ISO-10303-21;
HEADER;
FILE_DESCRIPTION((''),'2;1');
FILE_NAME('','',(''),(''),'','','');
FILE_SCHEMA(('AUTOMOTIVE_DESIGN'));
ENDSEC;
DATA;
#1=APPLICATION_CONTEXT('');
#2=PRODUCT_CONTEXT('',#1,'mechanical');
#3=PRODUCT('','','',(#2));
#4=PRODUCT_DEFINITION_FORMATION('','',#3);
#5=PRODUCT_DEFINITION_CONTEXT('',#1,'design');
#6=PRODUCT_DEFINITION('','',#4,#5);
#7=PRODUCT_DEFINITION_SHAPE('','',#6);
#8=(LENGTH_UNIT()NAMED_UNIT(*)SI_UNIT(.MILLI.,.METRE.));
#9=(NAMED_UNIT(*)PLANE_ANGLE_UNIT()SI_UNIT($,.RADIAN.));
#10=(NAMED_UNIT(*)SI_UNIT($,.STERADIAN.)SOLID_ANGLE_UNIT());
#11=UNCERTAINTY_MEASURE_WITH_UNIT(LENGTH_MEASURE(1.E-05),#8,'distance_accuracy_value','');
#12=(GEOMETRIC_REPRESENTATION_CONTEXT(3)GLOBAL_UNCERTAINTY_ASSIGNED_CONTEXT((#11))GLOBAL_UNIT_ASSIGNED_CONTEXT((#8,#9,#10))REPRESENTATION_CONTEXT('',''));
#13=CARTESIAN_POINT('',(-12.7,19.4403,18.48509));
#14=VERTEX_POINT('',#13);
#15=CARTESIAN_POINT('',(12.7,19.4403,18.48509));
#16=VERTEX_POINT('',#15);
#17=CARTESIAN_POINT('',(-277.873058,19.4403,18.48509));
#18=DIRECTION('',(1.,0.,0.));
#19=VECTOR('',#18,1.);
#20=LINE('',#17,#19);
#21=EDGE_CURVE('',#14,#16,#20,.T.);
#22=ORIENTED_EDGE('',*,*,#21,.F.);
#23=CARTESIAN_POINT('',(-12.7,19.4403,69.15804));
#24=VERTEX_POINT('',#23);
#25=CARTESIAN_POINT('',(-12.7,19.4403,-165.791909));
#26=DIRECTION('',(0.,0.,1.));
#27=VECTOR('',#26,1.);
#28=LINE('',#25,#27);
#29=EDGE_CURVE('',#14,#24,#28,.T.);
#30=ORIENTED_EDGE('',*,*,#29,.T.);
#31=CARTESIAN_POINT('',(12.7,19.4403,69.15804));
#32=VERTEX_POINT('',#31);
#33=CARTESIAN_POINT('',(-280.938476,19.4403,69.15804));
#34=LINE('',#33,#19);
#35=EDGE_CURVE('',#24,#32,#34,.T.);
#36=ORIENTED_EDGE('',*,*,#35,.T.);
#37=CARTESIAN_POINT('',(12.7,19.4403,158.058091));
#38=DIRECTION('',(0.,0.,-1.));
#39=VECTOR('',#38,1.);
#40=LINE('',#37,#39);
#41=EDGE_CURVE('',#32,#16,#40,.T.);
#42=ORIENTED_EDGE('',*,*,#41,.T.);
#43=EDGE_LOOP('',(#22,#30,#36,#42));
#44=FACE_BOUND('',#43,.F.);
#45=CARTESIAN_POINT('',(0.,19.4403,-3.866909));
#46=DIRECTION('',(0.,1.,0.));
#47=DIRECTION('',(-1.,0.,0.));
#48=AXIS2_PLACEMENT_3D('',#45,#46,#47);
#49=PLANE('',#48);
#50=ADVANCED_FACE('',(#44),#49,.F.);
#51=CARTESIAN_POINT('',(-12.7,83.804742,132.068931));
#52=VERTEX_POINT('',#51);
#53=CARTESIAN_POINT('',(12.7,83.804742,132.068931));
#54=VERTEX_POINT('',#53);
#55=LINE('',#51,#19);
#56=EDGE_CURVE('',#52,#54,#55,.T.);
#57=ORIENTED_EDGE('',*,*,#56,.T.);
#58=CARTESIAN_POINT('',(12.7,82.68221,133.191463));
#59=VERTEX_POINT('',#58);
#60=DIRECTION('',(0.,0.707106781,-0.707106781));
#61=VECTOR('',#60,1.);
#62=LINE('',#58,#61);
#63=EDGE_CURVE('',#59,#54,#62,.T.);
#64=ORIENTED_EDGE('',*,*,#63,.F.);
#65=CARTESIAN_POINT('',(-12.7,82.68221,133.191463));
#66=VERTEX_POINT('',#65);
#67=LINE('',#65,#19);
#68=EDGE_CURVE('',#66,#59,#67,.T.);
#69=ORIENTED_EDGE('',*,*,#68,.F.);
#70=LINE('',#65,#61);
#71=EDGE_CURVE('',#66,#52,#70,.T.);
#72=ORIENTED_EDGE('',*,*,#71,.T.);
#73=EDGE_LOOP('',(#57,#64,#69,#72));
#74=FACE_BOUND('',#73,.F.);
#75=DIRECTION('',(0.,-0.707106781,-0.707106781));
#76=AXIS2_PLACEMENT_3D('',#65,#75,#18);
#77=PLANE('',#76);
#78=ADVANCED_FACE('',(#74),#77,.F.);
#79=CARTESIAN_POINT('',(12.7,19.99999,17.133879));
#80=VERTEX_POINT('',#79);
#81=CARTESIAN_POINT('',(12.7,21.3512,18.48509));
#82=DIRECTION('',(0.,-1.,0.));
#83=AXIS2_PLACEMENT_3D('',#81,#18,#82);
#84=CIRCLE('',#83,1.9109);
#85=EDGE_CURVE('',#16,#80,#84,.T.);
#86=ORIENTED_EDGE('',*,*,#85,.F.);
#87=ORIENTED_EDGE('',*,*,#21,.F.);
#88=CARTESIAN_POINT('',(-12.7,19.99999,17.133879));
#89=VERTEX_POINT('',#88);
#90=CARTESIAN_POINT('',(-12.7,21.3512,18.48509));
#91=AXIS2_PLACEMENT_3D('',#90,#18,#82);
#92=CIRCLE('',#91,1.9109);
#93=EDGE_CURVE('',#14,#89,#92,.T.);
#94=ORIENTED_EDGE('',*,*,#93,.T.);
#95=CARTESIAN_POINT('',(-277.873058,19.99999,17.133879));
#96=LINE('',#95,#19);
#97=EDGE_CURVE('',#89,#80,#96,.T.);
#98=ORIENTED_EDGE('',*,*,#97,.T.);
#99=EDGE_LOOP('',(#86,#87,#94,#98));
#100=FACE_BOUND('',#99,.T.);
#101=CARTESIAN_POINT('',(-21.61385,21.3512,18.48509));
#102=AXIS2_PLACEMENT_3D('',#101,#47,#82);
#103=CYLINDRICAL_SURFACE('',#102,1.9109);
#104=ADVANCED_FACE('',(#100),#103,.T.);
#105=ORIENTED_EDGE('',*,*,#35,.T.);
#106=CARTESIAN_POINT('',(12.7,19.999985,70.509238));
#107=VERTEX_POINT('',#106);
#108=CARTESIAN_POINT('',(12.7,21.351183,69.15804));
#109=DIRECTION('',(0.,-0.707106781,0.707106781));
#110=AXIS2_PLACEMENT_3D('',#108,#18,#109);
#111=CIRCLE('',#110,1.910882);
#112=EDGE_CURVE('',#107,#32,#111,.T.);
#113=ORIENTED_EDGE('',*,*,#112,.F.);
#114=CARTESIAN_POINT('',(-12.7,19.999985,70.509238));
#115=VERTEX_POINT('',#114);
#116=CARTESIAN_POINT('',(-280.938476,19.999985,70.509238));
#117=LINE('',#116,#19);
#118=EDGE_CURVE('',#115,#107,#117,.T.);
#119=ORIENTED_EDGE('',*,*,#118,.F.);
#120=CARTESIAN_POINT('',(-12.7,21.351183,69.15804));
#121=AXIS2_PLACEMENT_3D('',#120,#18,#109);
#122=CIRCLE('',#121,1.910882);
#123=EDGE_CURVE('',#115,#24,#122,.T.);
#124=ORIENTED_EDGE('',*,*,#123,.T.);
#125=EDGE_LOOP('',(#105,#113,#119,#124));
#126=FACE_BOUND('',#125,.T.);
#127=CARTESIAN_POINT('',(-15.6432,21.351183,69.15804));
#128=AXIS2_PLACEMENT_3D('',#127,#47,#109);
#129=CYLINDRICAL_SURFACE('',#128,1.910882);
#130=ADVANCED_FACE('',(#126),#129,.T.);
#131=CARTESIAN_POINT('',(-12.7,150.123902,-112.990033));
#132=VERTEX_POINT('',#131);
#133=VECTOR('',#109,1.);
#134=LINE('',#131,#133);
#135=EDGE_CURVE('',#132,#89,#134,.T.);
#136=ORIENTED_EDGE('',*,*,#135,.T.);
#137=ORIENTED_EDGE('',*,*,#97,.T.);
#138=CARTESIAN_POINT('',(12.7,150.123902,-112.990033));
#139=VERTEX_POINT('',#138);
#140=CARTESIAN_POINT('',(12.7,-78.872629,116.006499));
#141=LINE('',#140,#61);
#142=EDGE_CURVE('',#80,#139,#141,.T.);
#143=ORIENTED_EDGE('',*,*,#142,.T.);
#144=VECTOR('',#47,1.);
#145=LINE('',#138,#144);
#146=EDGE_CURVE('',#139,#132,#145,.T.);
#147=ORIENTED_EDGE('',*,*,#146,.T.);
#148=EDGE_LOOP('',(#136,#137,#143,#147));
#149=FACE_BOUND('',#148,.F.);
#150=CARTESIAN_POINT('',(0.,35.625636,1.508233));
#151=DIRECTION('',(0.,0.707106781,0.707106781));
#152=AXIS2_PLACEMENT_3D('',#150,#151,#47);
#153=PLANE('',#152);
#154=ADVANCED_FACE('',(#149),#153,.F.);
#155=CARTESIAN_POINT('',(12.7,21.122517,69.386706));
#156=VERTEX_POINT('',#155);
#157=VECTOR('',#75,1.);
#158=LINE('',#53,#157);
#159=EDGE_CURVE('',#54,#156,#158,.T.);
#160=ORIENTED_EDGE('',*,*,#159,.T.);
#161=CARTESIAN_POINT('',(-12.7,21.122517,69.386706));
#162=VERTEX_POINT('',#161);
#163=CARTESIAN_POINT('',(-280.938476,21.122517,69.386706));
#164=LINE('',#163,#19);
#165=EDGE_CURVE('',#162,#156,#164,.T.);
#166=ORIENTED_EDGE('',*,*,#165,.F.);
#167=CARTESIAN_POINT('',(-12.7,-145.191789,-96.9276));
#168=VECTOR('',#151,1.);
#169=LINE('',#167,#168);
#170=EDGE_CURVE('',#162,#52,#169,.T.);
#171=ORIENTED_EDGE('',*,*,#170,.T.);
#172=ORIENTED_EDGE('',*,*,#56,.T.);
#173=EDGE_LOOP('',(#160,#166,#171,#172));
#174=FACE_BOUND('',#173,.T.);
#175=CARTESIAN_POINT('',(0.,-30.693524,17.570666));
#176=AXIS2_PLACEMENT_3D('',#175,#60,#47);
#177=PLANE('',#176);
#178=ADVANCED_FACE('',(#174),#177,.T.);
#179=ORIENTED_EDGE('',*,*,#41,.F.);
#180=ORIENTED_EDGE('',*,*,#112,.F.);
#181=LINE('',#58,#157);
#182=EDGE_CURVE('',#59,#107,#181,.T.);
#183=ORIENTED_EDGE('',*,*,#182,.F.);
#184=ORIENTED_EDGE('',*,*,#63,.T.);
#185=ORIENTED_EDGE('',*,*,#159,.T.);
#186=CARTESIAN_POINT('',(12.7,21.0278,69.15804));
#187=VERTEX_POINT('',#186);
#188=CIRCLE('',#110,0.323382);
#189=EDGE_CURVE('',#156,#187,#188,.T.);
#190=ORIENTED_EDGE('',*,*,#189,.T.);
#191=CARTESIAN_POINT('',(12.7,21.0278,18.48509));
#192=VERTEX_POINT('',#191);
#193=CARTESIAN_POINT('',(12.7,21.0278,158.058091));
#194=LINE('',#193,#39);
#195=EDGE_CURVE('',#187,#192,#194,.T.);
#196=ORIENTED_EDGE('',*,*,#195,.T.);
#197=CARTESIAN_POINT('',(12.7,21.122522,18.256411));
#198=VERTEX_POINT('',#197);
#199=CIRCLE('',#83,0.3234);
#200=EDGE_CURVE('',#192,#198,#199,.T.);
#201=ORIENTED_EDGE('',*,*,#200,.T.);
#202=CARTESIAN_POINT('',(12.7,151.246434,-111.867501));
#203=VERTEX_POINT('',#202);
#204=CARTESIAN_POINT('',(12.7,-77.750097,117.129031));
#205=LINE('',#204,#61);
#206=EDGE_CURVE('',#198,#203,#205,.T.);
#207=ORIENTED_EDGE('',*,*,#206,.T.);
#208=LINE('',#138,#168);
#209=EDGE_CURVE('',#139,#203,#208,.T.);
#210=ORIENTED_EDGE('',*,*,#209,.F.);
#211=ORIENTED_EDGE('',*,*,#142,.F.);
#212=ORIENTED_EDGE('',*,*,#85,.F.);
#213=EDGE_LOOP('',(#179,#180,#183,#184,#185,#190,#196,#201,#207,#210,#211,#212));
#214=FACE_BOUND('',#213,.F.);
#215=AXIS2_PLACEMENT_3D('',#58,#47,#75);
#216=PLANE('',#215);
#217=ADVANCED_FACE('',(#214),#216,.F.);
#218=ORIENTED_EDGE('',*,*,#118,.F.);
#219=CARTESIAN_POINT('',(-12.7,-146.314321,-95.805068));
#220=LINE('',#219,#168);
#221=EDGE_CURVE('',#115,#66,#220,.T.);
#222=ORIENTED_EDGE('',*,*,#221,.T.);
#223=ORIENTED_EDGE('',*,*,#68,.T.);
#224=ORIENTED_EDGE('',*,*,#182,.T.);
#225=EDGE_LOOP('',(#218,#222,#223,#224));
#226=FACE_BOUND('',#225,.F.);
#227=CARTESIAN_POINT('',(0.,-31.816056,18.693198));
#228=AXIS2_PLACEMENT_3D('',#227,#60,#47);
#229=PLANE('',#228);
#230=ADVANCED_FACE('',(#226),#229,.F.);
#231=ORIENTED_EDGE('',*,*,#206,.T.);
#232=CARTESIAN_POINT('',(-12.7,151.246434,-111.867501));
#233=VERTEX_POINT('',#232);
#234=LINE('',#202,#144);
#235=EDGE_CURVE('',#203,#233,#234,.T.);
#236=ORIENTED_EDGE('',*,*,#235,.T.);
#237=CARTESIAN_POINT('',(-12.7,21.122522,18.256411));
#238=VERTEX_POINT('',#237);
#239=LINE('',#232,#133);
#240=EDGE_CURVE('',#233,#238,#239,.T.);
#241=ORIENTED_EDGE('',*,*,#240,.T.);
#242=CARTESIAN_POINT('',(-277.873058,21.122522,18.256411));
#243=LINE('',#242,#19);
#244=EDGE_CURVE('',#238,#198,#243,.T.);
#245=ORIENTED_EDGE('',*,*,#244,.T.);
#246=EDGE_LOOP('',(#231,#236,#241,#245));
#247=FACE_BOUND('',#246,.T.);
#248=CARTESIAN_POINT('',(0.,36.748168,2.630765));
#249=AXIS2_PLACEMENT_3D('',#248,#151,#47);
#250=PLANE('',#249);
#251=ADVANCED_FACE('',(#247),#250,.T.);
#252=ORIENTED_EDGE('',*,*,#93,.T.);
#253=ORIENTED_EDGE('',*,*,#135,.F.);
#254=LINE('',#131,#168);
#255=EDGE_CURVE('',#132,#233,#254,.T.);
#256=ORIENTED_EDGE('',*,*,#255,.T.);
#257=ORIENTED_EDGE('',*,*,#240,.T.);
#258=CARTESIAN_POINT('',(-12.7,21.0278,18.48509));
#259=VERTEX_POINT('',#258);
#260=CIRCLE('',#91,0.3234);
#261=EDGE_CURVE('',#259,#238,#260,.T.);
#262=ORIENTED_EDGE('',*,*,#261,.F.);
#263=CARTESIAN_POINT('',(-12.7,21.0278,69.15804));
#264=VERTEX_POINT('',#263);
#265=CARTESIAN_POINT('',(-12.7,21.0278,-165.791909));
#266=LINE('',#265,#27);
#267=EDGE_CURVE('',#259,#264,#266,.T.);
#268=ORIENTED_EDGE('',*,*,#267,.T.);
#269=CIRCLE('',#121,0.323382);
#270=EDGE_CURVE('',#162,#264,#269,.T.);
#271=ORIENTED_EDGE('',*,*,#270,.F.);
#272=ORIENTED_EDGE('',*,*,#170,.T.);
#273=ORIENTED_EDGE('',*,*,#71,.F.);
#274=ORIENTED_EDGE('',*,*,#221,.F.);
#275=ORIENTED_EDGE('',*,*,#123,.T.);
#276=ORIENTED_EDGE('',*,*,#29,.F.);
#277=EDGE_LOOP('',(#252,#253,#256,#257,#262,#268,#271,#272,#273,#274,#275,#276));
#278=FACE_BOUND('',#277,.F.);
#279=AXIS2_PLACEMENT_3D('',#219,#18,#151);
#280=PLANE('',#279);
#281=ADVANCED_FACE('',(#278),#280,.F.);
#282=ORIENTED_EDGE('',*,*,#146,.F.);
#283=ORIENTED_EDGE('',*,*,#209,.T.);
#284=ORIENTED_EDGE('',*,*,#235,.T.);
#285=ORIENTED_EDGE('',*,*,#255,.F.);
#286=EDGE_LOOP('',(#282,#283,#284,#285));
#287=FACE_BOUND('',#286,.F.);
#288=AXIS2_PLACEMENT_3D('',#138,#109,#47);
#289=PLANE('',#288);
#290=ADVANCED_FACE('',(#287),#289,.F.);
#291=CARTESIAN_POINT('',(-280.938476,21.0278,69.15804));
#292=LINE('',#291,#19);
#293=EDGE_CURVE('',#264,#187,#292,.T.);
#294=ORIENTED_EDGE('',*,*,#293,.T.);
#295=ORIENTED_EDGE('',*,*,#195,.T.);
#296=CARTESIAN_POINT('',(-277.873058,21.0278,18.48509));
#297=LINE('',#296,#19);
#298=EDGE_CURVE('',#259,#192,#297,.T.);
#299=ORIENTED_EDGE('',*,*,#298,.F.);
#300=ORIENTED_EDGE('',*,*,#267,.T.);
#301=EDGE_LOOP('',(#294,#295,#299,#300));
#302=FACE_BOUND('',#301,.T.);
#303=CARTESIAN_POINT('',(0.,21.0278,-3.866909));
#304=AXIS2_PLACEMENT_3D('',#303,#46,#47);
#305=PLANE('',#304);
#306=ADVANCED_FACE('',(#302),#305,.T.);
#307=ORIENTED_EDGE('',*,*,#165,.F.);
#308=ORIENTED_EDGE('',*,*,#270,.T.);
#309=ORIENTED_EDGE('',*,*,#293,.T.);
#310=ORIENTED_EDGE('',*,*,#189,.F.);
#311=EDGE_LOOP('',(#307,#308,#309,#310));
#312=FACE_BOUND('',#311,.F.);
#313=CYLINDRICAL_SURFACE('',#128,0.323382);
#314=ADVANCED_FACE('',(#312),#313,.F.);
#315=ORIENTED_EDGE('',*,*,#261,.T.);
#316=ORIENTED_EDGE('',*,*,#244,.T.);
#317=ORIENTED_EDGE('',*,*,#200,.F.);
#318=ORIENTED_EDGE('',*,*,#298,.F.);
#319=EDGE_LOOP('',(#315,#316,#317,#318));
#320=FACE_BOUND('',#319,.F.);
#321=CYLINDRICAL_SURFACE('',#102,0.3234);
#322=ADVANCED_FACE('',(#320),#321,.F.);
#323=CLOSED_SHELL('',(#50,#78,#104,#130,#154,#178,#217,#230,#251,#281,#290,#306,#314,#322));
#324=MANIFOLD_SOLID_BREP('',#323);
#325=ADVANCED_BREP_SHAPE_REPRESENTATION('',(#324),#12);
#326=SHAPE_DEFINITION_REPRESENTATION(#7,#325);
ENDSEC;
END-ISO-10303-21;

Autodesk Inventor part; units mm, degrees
ref_plane "YZ Plane" through (0, 0, 0) normal (1, 0, 0) x (0, 1, 0)
ref_plane "XZ Plane" through (0, 0, 0) normal (0, 1, 0) x (-1, 0, 0)
ref_plane "XY Plane" through (0, 0, 0) normal (0, 0, 1) x (1, 0, 0)
sketch "Sketch1" plane through (0, 0, 0) normal (0, 1, 0) x (-1, 0, 0)
  line L0 (12.7, 161.925) -> (-12.7, 161.925)
  line L1 (-12.7, 161.925) -> (-12.7, -161.925)
  line L2 (-12.7, -161.925) -> (12.7, -161.925)
  line L3 (12.7, -161.925) -> (12.7, 161.925)
  line L4 (12.7, 161.925) -> (-12.7, -161.925) construction
  line L5 (-12.7, 161.925) -> (12.7, -161.925) construction
  point P0 (0, 0)
  dimension "d0" = 25.4
  dimension "d1" = 323.85
extrude "Extrusion1" add sketch "Sketch1" along normal blind 1.5875
sketch "Sketch2" plane through (0, 1.5875, 0) normal (0, 1, 0) x (1, 0, 0)
  line L0 (-12.7, -161.925) -> (12.7, -161.925) projected
  line L1 (-43.2277, -22.225) -> (46.1542, -22.225)
  point P0 (0, 0)
  dimension "d4" = 139.7
bend part "Bend Part1" radius 0.3234 angle 45 line through (-43.2277, 1.5875, 22.225) along (1, 0, 0) centre toward (0, 1, 0) moving side (0, 0, -1) both sides yes
sketch "Sketch4" plane through (-12.7, 1.6121, 22.3488) normal (0, 0.9238795, -0.3826834) x (1, 0, 0)
  line L0 (25.4, 0) -> (0, 0) projected
  line L1 (25.4, -139.573) -> (25.4, 0) projected
  line L2 (-18.5864, -50.8) -> (43.4016, -50.8)
  point P0 (12.7, 21.2645)
  dimension "d8" = 50.8
bend part "Bend Part2" radius 0.3234 angle 45 line through (-31.2864, 21.0524, 69.2818) along (1, 0, 0) centre toward (0, 0.9238795, -0.3826834) moving side (0, -0.3826834, -0.9238795) both sides yes
properties part number "finger" material "Polycarbonate, Clear"
